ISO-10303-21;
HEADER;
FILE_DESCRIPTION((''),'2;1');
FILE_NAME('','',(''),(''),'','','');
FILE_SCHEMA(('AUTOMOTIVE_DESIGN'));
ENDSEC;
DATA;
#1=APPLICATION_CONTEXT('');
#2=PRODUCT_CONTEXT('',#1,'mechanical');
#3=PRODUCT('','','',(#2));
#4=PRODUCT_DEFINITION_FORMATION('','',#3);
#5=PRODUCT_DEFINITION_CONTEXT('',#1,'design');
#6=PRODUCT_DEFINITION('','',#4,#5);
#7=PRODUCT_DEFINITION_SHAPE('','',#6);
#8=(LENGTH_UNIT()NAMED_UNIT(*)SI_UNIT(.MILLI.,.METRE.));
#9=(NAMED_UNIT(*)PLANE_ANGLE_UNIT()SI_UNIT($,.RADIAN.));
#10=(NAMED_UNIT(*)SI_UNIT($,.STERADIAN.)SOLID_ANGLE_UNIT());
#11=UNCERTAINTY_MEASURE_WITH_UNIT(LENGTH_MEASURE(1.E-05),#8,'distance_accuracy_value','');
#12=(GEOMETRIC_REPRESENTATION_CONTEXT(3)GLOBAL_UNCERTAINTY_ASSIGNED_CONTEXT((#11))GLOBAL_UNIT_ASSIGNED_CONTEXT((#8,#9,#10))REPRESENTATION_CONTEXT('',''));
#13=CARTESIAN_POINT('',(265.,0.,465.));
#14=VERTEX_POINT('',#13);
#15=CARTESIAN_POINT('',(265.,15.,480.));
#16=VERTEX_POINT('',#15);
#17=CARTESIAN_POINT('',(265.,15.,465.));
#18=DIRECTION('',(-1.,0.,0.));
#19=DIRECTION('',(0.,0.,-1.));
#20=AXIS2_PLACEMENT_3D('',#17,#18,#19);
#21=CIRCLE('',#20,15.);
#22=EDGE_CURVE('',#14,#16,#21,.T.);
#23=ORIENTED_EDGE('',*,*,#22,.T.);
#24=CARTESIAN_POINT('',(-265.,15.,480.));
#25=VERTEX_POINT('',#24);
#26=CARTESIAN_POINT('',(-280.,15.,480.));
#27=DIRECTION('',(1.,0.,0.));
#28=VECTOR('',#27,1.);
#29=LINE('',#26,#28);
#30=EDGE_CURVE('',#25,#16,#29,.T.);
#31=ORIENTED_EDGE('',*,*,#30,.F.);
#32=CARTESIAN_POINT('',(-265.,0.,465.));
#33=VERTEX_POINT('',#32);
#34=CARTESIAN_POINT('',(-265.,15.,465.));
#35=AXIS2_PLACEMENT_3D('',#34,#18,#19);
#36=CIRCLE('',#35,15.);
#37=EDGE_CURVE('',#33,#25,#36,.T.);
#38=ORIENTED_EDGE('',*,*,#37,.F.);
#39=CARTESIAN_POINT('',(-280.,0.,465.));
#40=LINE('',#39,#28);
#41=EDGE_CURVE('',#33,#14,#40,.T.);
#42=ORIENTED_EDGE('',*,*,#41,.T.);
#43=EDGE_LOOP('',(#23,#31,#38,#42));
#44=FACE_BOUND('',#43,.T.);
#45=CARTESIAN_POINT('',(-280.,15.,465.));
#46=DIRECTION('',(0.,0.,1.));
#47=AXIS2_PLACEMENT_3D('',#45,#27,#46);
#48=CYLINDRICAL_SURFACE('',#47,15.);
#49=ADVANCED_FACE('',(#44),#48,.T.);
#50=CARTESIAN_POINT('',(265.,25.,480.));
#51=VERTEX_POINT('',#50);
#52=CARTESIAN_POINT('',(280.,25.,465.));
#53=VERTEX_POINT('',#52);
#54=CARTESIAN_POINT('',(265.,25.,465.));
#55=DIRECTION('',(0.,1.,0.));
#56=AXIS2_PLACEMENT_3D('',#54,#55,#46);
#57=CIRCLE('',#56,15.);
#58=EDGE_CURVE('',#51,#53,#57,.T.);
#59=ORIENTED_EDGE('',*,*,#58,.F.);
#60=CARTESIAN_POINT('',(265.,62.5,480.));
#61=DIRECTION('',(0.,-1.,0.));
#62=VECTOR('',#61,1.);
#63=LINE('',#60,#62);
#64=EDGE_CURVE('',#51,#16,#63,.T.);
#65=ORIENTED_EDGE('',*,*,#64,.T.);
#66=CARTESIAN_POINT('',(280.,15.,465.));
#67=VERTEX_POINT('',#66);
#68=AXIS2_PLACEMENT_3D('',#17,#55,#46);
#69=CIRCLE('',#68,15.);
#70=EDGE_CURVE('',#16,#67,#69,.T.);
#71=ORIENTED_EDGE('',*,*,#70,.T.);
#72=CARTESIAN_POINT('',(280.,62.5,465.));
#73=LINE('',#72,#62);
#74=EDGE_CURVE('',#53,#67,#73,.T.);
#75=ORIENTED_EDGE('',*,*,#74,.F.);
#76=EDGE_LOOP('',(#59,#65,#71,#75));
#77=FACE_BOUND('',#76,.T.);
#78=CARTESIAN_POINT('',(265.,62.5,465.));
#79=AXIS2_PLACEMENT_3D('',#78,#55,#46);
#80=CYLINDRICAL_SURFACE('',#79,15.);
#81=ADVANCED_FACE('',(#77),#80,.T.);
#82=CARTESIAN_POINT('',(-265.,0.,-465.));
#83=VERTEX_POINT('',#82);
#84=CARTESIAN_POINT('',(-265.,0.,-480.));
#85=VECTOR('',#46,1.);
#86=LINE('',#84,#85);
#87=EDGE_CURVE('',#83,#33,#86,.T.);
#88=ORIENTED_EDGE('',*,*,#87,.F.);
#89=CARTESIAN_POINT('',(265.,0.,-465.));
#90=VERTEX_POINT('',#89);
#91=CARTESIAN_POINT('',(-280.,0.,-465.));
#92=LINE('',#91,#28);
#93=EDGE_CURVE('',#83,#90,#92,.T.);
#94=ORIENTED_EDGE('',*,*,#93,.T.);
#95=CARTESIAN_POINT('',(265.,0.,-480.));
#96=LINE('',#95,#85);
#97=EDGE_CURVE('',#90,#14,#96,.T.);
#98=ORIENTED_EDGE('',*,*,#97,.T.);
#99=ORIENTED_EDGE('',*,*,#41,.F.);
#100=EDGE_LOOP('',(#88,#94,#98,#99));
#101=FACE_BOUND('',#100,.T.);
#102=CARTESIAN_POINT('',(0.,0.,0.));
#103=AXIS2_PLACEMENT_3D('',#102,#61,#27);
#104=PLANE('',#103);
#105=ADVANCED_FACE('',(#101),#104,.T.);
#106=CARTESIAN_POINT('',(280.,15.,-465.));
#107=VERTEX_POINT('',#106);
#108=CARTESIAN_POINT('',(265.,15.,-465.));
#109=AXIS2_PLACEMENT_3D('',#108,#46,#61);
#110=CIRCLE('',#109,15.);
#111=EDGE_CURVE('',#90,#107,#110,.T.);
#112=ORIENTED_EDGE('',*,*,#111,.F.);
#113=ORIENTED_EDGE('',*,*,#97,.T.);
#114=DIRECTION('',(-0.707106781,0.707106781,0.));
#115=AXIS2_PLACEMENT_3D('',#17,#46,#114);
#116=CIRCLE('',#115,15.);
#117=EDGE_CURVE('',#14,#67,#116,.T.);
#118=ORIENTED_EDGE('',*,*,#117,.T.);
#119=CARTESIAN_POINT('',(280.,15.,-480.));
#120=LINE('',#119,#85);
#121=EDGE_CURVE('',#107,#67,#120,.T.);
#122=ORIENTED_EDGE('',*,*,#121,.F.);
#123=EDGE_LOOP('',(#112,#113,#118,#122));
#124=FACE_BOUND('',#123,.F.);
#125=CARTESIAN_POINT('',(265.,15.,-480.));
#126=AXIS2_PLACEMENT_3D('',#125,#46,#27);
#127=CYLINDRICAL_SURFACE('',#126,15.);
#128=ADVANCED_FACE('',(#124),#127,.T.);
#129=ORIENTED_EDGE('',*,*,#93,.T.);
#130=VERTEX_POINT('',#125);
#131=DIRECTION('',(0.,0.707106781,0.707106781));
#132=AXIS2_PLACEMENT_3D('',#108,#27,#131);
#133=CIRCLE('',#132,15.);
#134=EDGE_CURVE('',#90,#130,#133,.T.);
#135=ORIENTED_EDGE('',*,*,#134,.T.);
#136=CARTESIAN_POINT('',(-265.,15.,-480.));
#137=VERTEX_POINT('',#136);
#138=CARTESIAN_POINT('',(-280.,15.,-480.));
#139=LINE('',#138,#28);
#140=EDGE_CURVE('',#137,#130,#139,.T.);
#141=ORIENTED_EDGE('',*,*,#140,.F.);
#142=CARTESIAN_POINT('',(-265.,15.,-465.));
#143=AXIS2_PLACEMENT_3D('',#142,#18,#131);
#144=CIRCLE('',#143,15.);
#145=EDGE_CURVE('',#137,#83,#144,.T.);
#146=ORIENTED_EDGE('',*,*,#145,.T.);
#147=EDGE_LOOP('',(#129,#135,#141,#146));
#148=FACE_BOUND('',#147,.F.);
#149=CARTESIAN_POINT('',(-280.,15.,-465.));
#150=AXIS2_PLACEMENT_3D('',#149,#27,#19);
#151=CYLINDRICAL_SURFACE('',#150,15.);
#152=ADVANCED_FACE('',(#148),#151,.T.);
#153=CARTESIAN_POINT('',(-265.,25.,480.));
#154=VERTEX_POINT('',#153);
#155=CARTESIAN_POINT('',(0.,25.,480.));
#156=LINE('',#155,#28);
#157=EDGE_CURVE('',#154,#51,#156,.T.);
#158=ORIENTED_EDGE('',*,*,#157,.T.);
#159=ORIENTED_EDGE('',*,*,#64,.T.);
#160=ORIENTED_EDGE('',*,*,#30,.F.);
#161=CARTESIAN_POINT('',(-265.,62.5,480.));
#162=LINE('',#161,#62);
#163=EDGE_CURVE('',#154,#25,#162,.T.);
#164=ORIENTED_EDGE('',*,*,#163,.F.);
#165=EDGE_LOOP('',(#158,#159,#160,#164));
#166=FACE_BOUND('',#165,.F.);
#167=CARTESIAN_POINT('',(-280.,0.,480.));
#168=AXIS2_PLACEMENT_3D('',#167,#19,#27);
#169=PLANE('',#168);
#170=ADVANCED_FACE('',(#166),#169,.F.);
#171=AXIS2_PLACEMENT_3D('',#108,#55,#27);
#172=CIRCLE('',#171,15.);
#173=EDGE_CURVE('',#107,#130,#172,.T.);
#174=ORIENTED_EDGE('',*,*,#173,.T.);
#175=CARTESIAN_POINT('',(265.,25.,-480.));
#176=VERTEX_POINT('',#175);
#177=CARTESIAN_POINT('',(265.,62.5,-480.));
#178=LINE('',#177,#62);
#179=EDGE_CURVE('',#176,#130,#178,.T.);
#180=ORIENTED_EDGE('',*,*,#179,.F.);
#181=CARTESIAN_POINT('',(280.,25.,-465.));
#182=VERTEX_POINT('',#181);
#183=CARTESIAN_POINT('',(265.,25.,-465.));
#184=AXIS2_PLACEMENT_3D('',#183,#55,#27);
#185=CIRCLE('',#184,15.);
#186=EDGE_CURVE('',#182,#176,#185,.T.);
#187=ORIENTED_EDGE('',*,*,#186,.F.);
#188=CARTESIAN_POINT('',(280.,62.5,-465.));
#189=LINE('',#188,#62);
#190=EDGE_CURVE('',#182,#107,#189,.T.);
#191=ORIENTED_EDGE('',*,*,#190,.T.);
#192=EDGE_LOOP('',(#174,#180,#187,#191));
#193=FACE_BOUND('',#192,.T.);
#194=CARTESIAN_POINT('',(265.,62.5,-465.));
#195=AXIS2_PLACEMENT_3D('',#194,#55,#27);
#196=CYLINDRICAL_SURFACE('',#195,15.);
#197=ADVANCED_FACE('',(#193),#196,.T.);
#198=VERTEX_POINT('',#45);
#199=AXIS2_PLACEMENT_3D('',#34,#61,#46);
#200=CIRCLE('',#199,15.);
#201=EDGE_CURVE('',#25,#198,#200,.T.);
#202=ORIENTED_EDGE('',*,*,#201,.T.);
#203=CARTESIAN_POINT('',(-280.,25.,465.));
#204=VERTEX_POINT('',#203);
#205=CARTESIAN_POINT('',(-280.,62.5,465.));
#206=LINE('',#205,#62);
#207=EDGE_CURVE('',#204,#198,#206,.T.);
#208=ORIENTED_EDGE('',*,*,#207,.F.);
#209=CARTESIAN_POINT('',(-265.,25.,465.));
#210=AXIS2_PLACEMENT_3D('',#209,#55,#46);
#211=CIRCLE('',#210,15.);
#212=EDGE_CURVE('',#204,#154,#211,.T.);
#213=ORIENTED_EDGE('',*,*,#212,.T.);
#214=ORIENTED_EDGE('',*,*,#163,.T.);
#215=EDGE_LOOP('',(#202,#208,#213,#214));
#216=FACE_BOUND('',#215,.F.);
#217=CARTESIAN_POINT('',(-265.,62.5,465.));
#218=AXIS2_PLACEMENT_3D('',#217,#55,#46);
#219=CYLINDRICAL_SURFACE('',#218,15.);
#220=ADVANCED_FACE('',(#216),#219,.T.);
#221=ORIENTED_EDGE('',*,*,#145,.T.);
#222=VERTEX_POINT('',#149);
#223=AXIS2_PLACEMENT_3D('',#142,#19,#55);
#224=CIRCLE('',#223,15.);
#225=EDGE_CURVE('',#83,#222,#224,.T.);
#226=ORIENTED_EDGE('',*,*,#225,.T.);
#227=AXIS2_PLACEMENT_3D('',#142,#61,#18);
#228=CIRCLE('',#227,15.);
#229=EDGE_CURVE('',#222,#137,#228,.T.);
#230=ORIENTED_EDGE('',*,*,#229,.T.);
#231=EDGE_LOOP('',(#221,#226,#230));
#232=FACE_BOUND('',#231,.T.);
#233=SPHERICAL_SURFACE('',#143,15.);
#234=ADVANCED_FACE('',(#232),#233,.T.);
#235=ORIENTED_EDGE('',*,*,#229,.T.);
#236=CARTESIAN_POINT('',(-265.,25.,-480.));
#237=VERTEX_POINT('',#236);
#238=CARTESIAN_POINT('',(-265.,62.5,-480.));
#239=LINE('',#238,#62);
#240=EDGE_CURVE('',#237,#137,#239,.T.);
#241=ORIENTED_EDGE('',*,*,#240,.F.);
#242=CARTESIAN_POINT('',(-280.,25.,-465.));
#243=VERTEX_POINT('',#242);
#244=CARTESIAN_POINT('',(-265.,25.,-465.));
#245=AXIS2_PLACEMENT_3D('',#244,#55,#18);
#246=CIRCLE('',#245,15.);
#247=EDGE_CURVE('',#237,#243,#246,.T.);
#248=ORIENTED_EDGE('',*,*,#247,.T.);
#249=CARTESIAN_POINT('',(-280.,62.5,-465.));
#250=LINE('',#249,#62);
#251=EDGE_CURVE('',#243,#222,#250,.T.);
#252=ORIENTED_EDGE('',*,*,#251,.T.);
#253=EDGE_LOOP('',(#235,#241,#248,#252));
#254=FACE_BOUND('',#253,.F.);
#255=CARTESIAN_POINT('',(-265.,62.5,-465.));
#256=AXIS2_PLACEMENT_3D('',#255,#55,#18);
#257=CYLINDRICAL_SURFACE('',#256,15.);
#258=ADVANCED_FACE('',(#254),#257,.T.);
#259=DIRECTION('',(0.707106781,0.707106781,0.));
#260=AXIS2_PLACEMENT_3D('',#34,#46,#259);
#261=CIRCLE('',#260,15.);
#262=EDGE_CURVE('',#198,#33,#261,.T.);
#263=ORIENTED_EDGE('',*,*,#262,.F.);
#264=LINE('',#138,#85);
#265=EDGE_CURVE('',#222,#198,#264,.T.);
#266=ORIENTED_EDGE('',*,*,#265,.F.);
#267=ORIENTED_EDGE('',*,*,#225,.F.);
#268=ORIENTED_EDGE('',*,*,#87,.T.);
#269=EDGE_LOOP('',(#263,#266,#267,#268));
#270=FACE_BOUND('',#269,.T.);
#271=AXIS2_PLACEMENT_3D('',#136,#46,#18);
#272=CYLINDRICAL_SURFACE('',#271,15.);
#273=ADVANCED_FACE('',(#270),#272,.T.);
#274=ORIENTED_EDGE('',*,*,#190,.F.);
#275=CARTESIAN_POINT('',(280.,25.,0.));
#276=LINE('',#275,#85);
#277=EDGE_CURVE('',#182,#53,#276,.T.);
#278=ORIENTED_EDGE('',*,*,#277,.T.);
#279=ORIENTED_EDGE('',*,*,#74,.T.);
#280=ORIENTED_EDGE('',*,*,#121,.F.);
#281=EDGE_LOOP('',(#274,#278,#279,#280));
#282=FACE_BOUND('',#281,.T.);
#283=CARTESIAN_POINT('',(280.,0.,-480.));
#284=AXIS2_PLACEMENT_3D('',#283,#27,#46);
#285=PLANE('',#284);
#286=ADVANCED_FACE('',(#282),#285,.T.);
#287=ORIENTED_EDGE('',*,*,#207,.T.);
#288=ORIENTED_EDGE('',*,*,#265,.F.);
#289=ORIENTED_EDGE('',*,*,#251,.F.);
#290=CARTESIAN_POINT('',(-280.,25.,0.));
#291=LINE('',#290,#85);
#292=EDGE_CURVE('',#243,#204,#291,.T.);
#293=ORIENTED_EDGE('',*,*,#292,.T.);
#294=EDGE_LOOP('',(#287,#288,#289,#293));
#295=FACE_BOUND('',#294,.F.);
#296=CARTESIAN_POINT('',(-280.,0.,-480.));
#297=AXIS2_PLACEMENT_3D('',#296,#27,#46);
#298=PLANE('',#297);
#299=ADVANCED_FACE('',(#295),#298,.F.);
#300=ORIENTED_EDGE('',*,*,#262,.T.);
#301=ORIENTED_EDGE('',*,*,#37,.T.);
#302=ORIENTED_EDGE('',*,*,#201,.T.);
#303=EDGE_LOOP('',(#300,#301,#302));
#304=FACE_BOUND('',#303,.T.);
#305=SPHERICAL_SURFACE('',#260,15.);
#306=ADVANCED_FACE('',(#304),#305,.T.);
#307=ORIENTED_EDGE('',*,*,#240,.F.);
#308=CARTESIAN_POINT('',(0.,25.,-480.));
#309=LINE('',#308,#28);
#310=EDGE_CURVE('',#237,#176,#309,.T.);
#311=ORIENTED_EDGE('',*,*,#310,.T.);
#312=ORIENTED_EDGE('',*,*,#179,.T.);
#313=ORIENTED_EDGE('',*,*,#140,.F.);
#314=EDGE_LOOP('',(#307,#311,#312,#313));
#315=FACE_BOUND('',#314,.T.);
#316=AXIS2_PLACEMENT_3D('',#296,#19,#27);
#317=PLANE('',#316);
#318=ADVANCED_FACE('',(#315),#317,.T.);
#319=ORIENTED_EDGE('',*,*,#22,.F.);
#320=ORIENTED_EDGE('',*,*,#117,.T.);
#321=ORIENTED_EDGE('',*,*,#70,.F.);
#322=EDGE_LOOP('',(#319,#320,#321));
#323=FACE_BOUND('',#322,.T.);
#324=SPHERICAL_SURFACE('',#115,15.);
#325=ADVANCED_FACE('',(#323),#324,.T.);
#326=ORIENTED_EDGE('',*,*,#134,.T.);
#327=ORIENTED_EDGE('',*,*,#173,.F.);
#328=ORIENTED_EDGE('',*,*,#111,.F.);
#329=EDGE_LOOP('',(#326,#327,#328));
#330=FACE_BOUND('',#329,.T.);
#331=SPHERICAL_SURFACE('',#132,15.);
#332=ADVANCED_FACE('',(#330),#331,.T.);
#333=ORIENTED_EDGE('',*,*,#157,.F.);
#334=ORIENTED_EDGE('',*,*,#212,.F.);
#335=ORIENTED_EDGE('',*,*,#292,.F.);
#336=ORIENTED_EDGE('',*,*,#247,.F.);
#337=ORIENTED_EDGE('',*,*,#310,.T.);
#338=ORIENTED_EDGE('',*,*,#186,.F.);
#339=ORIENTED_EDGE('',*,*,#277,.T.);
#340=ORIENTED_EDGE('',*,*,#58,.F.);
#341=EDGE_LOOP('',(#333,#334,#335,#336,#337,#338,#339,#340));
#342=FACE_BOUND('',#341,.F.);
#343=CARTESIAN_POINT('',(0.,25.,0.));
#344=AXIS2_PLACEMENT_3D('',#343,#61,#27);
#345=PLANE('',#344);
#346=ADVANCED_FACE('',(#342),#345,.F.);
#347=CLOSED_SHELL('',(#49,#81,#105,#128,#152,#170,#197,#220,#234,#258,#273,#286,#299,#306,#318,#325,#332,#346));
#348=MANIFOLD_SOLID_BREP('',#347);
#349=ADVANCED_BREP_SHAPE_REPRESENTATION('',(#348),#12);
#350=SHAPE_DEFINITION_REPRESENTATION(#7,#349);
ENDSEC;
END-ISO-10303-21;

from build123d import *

# Parameters (mm, degrees)
F0_W         = 560
F0_H         = 960
F2_DEPTH     = 25
F3_R         = 15
F4_T1_DEPTH  = 47.5
F4_S5_W      = 15
F4_S5_H      = 15
F4_T6_DEPTH  = 15
F4_S11_W     = 15
F4_S11_H     = 15
F4_T12_DEPTH = 15
F4_S17_W     = 15
F4_S17_H     = 15
F4_T18_DEPTH = 15
F4_S23_W     = 15
F4_S23_H     = 15
F4_T24_DEPTH = 15


# Not quite as in the source:
# - a fillet or chamfer that OpenCascade refuses, or shapes differently, is made with other operations: its cross-section is extruded or revolved along the edge and cut away or added


with BuildPart() as f2:
    # F0 (on Front) → F2 (new body)
    with BuildSketch(Plane.XZ):
        Rectangle(F0_W, F0_H)
    extrude(amount=-F2_DEPTH)

    # F3
    f3_edges = [f2.edges().sort_by_distance(p)[0] for p in [
        (0, 0, 480),
        (-280, 0, 0),
        (0, 0, -480),
        (280, 0, 0),
    ]]
    fillet(f3_edges, radius=F3_R)

    # F4: fillet of radius 15 on 8 edges, made by hand

    # F4_s2 → F4_t1 (cut)
    with BuildSketch(Plane.XZ.offset(-62.5)):
        with BuildLine():
            ThreePointArc((-280, -465), (-275.6066017178, -475.6066017178), (-265, -480))
            Line((-265, -480), (-280, -480))
            Line((-280, -480), (-280, -465))
        make_face()
        with BuildLine():
            ThreePointArc((280, -465), (275.6066017178, -475.6066017178), (265, -480))
            Line((265, -480), (280, -480))
            Line((280, -480), (280, -465))
        make_face()
        with BuildLine():
            ThreePointArc((-265, 480), (-275.6066017178, 475.6066017178), (-280, 465))
            Line((-280, 465), (-280, 480))
            Line((-280, 480), (-265, 480))
        make_face()
        with BuildLine():
            ThreePointArc((265, 480), (275.6066017178, 475.6066017178), (280, 465))
            Line((280, 465), (280, 480))
            Line((280, 480), (265, 480))
        make_face()
    extrude(amount=F4_T1_DEPTH, mode=Mode.SUBTRACT)


with BuildPart() as f4_tool4:
    # F4_s5 → F4_t6 (new body)
    with BuildSketch(Plane.XY.offset(465)):
        with Locations((272.5, 7.5)):
            Rectangle(F4_S5_W, F4_S5_H)
    extrude(amount=F4_T6_DEPTH)

    # F4_s7 → F4_t8 (revolve, cut)
    with BuildSketch(Plane(origin=(265, 15, 465), x_dir=(-0.7071067812, 0.7071067812, 0), z_dir=(0.7071067812, 0.7071067812, 0))):
        with BuildLine():
            ThreePointArc((0, -15), (15, 0), (0, 15))
            Line((0, 15), (0, -15))
        make_face()
    revolve(axis=Axis((265, 15, 465), (0, 0, 1)), mode=Mode.SUBTRACT)


with BuildPart() as f2_1:
    add(f2.part)

    # F4_t3: cut F4_tool4
    add(f4_tool4.part, mode=Mode.SUBTRACT)


with BuildPart() as f4_tool10:
    # F4_s11 → F4_t12 (new body)
    with BuildSketch(Plane.XY.offset(465)):
        with Locations((-272.5, 7.5)):
            Rectangle(F4_S11_W, F4_S11_H)
    extrude(amount=F4_T12_DEPTH)

    # F4_s13 → F4_t14 (revolve, cut)
    with BuildSketch(Plane(origin=(-265, 15, 465), x_dir=(0.7071067812, 0.7071067812, 0), z_dir=(0.7071067812, -0.7071067812, 0))):
        with BuildLine():
            ThreePointArc((0, -15), (15, 0), (0, 15))
            Line((0, 15), (0, -15))
        make_face()
    revolve(axis=Axis((-265, 15, 465), (0, 0, 1)), mode=Mode.SUBTRACT)


with BuildPart() as f2_2:
    add(f2_1.part)

    # F4_t9: cut F4_tool10
    add(f4_tool10.part, mode=Mode.SUBTRACT)


with BuildPart() as f4_tool16:
    # F4_s17 → F4_t18 (new body)
    with BuildSketch(Plane.YZ.offset(265)):
        with Locations((7.5, -472.5)):
            Rectangle(F4_S17_W, F4_S17_H)
    extrude(amount=F4_T18_DEPTH)

    # F4_s19 → F4_t20 (revolve, cut)
    with BuildSketch(Plane(origin=(265, 15, -465), x_dir=(0, 0.7071067812, 0.7071067812), z_dir=(0, 0.7071067812, -0.7071067812))):
        with BuildLine():
            ThreePointArc((0, -15), (15, 0), (0, 15))
            Line((0, 15), (0, -15))
        make_face()
    revolve(axis=Axis((265, 15, -465), (1, 0, 0)), mode=Mode.SUBTRACT)


with BuildPart() as f2_3:
    add(f2_2.part)

    # F4_t15: cut F4_tool16
    add(f4_tool16.part, mode=Mode.SUBTRACT)


with BuildPart() as f4_tool22:
    # F4_s23 → F4_t24 (new body)
    with BuildSketch(Plane.YZ.offset(-265)):
        with Locations((7.5, -472.5)):
            Rectangle(F4_S23_W, F4_S23_H)
    extrude(amount=-F4_T24_DEPTH)

    # F4_s25 → F4_t26 (revolve, cut)
    with BuildSketch(Plane(origin=(-265, 15, -465), x_dir=(0, 0.7071067812, 0.7071067812), z_dir=(0, -0.7071067812, 0.7071067812))):
        with BuildLine():
            ThreePointArc((0, -15), (15, 0), (0, 15))
            Line((0, 15), (0, -15))
        make_face()
    revolve(axis=Axis((-265, 15, -465), (-1, 0, 0)), mode=Mode.SUBTRACT)


with BuildPart() as f2_4:
    add(f2_3.part)

    # F4_t21: cut F4_tool22
    add(f4_tool22.part, mode=Mode.SUBTRACT)


solid = f2_4.part
